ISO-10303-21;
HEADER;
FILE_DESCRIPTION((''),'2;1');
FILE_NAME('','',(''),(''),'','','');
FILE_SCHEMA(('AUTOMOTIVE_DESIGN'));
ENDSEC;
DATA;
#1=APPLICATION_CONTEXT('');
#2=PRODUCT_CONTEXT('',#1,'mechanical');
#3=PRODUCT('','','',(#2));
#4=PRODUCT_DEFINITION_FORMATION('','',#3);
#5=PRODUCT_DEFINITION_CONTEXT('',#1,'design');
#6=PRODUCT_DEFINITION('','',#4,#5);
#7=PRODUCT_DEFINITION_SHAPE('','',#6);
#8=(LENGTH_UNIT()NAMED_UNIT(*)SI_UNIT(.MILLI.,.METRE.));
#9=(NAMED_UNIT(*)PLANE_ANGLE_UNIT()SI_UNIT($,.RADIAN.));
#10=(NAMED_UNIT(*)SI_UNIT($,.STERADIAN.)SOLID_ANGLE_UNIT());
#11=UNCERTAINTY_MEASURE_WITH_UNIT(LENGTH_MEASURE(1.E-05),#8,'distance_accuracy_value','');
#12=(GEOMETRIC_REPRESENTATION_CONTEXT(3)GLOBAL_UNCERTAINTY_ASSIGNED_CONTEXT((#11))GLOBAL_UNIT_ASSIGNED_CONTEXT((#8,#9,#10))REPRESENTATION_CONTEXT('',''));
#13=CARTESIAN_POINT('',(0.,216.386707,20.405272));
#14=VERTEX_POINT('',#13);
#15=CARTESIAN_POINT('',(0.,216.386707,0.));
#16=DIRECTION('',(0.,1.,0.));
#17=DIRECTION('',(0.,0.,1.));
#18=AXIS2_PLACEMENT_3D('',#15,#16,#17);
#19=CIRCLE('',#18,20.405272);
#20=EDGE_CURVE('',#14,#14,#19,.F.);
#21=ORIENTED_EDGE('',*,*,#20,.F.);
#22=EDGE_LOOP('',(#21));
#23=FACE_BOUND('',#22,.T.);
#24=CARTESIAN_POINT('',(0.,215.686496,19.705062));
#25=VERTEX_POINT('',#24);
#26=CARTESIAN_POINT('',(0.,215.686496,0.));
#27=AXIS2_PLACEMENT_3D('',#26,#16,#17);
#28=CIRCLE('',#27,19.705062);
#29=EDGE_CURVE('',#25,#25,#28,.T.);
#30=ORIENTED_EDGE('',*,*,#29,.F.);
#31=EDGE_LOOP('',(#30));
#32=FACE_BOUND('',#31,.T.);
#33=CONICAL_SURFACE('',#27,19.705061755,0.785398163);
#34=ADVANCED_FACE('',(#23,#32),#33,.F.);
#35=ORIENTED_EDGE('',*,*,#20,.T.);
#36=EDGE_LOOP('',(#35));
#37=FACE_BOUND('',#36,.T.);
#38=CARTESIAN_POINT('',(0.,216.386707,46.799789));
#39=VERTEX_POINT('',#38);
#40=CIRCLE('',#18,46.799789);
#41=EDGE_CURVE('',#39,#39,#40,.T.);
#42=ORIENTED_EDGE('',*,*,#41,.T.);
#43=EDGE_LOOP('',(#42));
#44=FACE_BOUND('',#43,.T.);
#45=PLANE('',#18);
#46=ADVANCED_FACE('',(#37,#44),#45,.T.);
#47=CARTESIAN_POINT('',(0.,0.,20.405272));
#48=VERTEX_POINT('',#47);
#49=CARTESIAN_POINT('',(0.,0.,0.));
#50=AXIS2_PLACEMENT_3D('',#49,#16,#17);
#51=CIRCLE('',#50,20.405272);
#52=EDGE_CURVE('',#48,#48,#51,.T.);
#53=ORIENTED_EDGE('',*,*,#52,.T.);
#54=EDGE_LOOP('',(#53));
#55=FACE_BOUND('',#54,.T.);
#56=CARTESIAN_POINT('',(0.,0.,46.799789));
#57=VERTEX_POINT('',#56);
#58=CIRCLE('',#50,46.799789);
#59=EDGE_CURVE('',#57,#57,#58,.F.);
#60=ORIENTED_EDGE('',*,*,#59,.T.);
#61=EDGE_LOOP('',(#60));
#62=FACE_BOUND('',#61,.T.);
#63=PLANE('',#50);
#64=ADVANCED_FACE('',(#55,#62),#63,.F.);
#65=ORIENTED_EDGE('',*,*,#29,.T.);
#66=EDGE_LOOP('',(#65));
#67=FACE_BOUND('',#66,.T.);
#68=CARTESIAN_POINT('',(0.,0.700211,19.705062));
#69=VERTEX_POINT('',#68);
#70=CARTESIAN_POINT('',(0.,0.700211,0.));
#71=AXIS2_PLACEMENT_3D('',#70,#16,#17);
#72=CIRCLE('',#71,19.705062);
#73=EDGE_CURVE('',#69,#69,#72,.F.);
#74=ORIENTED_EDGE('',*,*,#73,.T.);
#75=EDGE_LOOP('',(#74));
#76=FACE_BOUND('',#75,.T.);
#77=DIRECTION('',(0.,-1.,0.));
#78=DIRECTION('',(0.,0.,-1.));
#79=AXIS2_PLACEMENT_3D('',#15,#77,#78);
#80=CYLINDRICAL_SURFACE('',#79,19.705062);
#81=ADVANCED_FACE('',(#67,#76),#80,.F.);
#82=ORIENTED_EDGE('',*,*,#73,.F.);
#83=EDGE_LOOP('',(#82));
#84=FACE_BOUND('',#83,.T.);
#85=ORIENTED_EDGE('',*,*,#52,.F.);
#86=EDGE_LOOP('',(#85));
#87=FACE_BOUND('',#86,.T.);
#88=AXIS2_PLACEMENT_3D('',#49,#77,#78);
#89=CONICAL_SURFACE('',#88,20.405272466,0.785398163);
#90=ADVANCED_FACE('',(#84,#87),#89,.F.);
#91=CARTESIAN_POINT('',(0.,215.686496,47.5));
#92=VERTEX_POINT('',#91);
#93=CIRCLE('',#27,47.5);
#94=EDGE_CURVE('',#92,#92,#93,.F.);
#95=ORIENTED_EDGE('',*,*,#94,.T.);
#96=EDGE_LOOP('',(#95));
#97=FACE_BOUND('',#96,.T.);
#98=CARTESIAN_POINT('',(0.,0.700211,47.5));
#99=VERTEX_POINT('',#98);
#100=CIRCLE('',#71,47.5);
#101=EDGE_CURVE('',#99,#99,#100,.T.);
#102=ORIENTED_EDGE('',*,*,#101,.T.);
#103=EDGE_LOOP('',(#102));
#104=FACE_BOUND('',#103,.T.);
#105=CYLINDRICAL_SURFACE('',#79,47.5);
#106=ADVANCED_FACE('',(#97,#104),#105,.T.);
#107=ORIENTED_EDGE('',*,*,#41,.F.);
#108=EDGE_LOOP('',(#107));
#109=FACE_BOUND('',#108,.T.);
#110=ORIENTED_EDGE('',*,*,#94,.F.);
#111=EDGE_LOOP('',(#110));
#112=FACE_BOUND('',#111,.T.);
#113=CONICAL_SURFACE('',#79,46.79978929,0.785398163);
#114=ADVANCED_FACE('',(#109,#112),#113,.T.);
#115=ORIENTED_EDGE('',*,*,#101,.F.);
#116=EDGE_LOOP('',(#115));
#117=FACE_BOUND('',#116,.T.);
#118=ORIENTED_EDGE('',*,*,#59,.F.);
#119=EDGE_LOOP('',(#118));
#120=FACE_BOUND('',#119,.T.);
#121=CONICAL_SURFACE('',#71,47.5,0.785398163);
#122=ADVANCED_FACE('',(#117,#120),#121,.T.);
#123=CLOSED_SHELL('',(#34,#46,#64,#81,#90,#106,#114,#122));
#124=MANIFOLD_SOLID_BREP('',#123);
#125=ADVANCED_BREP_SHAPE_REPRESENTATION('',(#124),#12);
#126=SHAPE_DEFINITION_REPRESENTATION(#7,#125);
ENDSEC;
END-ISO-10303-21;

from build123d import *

# Parameters (mm, degrees)
SKETCH1_R           = 47.5
BOSS_EXTRUDE1_DEPTH = 216.38670689
SKETCH2_R           = 19.705061755
CUT_EXTRUDE1_DEPTH  = 227.573844295
CHAMFER1_SIZE       = 0.70021071


with BuildPart() as part:
    # Sketch1 → Boss-Extrude1 (new body)
    with BuildSketch(Plane(origin=(0, 0, 0), x_dir=(1, 0, 0), z_dir=(0, 1, 0))):
        Circle(SKETCH1_R)
    extrude(amount=BOSS_EXTRUDE1_DEPTH)

    # Sketch2 → Cut-Extrude1 (cut, through all)
    with BuildSketch(Plane(origin=(0, 0, 0), x_dir=(1, 0, 0), z_dir=(0, 1, 0))):
        Circle(SKETCH2_R)
    extrude(amount=CUT_EXTRUDE1_DEPTH, mode=Mode.SUBTRACT)

    # Chamfer1
    chamfer1_edges = [part.edges().sort_by_distance(p)[0] for p in [
        (-19.705061755, 216.38670689, 0),
        (-19.705061755, 0, 0),
        (-47.5, 0, 0),
        (-47.5, 216.38670689, 0),
    ]]
    chamfer(chamfer1_edges, length=CHAMFER1_SIZE)


solid = part.part
